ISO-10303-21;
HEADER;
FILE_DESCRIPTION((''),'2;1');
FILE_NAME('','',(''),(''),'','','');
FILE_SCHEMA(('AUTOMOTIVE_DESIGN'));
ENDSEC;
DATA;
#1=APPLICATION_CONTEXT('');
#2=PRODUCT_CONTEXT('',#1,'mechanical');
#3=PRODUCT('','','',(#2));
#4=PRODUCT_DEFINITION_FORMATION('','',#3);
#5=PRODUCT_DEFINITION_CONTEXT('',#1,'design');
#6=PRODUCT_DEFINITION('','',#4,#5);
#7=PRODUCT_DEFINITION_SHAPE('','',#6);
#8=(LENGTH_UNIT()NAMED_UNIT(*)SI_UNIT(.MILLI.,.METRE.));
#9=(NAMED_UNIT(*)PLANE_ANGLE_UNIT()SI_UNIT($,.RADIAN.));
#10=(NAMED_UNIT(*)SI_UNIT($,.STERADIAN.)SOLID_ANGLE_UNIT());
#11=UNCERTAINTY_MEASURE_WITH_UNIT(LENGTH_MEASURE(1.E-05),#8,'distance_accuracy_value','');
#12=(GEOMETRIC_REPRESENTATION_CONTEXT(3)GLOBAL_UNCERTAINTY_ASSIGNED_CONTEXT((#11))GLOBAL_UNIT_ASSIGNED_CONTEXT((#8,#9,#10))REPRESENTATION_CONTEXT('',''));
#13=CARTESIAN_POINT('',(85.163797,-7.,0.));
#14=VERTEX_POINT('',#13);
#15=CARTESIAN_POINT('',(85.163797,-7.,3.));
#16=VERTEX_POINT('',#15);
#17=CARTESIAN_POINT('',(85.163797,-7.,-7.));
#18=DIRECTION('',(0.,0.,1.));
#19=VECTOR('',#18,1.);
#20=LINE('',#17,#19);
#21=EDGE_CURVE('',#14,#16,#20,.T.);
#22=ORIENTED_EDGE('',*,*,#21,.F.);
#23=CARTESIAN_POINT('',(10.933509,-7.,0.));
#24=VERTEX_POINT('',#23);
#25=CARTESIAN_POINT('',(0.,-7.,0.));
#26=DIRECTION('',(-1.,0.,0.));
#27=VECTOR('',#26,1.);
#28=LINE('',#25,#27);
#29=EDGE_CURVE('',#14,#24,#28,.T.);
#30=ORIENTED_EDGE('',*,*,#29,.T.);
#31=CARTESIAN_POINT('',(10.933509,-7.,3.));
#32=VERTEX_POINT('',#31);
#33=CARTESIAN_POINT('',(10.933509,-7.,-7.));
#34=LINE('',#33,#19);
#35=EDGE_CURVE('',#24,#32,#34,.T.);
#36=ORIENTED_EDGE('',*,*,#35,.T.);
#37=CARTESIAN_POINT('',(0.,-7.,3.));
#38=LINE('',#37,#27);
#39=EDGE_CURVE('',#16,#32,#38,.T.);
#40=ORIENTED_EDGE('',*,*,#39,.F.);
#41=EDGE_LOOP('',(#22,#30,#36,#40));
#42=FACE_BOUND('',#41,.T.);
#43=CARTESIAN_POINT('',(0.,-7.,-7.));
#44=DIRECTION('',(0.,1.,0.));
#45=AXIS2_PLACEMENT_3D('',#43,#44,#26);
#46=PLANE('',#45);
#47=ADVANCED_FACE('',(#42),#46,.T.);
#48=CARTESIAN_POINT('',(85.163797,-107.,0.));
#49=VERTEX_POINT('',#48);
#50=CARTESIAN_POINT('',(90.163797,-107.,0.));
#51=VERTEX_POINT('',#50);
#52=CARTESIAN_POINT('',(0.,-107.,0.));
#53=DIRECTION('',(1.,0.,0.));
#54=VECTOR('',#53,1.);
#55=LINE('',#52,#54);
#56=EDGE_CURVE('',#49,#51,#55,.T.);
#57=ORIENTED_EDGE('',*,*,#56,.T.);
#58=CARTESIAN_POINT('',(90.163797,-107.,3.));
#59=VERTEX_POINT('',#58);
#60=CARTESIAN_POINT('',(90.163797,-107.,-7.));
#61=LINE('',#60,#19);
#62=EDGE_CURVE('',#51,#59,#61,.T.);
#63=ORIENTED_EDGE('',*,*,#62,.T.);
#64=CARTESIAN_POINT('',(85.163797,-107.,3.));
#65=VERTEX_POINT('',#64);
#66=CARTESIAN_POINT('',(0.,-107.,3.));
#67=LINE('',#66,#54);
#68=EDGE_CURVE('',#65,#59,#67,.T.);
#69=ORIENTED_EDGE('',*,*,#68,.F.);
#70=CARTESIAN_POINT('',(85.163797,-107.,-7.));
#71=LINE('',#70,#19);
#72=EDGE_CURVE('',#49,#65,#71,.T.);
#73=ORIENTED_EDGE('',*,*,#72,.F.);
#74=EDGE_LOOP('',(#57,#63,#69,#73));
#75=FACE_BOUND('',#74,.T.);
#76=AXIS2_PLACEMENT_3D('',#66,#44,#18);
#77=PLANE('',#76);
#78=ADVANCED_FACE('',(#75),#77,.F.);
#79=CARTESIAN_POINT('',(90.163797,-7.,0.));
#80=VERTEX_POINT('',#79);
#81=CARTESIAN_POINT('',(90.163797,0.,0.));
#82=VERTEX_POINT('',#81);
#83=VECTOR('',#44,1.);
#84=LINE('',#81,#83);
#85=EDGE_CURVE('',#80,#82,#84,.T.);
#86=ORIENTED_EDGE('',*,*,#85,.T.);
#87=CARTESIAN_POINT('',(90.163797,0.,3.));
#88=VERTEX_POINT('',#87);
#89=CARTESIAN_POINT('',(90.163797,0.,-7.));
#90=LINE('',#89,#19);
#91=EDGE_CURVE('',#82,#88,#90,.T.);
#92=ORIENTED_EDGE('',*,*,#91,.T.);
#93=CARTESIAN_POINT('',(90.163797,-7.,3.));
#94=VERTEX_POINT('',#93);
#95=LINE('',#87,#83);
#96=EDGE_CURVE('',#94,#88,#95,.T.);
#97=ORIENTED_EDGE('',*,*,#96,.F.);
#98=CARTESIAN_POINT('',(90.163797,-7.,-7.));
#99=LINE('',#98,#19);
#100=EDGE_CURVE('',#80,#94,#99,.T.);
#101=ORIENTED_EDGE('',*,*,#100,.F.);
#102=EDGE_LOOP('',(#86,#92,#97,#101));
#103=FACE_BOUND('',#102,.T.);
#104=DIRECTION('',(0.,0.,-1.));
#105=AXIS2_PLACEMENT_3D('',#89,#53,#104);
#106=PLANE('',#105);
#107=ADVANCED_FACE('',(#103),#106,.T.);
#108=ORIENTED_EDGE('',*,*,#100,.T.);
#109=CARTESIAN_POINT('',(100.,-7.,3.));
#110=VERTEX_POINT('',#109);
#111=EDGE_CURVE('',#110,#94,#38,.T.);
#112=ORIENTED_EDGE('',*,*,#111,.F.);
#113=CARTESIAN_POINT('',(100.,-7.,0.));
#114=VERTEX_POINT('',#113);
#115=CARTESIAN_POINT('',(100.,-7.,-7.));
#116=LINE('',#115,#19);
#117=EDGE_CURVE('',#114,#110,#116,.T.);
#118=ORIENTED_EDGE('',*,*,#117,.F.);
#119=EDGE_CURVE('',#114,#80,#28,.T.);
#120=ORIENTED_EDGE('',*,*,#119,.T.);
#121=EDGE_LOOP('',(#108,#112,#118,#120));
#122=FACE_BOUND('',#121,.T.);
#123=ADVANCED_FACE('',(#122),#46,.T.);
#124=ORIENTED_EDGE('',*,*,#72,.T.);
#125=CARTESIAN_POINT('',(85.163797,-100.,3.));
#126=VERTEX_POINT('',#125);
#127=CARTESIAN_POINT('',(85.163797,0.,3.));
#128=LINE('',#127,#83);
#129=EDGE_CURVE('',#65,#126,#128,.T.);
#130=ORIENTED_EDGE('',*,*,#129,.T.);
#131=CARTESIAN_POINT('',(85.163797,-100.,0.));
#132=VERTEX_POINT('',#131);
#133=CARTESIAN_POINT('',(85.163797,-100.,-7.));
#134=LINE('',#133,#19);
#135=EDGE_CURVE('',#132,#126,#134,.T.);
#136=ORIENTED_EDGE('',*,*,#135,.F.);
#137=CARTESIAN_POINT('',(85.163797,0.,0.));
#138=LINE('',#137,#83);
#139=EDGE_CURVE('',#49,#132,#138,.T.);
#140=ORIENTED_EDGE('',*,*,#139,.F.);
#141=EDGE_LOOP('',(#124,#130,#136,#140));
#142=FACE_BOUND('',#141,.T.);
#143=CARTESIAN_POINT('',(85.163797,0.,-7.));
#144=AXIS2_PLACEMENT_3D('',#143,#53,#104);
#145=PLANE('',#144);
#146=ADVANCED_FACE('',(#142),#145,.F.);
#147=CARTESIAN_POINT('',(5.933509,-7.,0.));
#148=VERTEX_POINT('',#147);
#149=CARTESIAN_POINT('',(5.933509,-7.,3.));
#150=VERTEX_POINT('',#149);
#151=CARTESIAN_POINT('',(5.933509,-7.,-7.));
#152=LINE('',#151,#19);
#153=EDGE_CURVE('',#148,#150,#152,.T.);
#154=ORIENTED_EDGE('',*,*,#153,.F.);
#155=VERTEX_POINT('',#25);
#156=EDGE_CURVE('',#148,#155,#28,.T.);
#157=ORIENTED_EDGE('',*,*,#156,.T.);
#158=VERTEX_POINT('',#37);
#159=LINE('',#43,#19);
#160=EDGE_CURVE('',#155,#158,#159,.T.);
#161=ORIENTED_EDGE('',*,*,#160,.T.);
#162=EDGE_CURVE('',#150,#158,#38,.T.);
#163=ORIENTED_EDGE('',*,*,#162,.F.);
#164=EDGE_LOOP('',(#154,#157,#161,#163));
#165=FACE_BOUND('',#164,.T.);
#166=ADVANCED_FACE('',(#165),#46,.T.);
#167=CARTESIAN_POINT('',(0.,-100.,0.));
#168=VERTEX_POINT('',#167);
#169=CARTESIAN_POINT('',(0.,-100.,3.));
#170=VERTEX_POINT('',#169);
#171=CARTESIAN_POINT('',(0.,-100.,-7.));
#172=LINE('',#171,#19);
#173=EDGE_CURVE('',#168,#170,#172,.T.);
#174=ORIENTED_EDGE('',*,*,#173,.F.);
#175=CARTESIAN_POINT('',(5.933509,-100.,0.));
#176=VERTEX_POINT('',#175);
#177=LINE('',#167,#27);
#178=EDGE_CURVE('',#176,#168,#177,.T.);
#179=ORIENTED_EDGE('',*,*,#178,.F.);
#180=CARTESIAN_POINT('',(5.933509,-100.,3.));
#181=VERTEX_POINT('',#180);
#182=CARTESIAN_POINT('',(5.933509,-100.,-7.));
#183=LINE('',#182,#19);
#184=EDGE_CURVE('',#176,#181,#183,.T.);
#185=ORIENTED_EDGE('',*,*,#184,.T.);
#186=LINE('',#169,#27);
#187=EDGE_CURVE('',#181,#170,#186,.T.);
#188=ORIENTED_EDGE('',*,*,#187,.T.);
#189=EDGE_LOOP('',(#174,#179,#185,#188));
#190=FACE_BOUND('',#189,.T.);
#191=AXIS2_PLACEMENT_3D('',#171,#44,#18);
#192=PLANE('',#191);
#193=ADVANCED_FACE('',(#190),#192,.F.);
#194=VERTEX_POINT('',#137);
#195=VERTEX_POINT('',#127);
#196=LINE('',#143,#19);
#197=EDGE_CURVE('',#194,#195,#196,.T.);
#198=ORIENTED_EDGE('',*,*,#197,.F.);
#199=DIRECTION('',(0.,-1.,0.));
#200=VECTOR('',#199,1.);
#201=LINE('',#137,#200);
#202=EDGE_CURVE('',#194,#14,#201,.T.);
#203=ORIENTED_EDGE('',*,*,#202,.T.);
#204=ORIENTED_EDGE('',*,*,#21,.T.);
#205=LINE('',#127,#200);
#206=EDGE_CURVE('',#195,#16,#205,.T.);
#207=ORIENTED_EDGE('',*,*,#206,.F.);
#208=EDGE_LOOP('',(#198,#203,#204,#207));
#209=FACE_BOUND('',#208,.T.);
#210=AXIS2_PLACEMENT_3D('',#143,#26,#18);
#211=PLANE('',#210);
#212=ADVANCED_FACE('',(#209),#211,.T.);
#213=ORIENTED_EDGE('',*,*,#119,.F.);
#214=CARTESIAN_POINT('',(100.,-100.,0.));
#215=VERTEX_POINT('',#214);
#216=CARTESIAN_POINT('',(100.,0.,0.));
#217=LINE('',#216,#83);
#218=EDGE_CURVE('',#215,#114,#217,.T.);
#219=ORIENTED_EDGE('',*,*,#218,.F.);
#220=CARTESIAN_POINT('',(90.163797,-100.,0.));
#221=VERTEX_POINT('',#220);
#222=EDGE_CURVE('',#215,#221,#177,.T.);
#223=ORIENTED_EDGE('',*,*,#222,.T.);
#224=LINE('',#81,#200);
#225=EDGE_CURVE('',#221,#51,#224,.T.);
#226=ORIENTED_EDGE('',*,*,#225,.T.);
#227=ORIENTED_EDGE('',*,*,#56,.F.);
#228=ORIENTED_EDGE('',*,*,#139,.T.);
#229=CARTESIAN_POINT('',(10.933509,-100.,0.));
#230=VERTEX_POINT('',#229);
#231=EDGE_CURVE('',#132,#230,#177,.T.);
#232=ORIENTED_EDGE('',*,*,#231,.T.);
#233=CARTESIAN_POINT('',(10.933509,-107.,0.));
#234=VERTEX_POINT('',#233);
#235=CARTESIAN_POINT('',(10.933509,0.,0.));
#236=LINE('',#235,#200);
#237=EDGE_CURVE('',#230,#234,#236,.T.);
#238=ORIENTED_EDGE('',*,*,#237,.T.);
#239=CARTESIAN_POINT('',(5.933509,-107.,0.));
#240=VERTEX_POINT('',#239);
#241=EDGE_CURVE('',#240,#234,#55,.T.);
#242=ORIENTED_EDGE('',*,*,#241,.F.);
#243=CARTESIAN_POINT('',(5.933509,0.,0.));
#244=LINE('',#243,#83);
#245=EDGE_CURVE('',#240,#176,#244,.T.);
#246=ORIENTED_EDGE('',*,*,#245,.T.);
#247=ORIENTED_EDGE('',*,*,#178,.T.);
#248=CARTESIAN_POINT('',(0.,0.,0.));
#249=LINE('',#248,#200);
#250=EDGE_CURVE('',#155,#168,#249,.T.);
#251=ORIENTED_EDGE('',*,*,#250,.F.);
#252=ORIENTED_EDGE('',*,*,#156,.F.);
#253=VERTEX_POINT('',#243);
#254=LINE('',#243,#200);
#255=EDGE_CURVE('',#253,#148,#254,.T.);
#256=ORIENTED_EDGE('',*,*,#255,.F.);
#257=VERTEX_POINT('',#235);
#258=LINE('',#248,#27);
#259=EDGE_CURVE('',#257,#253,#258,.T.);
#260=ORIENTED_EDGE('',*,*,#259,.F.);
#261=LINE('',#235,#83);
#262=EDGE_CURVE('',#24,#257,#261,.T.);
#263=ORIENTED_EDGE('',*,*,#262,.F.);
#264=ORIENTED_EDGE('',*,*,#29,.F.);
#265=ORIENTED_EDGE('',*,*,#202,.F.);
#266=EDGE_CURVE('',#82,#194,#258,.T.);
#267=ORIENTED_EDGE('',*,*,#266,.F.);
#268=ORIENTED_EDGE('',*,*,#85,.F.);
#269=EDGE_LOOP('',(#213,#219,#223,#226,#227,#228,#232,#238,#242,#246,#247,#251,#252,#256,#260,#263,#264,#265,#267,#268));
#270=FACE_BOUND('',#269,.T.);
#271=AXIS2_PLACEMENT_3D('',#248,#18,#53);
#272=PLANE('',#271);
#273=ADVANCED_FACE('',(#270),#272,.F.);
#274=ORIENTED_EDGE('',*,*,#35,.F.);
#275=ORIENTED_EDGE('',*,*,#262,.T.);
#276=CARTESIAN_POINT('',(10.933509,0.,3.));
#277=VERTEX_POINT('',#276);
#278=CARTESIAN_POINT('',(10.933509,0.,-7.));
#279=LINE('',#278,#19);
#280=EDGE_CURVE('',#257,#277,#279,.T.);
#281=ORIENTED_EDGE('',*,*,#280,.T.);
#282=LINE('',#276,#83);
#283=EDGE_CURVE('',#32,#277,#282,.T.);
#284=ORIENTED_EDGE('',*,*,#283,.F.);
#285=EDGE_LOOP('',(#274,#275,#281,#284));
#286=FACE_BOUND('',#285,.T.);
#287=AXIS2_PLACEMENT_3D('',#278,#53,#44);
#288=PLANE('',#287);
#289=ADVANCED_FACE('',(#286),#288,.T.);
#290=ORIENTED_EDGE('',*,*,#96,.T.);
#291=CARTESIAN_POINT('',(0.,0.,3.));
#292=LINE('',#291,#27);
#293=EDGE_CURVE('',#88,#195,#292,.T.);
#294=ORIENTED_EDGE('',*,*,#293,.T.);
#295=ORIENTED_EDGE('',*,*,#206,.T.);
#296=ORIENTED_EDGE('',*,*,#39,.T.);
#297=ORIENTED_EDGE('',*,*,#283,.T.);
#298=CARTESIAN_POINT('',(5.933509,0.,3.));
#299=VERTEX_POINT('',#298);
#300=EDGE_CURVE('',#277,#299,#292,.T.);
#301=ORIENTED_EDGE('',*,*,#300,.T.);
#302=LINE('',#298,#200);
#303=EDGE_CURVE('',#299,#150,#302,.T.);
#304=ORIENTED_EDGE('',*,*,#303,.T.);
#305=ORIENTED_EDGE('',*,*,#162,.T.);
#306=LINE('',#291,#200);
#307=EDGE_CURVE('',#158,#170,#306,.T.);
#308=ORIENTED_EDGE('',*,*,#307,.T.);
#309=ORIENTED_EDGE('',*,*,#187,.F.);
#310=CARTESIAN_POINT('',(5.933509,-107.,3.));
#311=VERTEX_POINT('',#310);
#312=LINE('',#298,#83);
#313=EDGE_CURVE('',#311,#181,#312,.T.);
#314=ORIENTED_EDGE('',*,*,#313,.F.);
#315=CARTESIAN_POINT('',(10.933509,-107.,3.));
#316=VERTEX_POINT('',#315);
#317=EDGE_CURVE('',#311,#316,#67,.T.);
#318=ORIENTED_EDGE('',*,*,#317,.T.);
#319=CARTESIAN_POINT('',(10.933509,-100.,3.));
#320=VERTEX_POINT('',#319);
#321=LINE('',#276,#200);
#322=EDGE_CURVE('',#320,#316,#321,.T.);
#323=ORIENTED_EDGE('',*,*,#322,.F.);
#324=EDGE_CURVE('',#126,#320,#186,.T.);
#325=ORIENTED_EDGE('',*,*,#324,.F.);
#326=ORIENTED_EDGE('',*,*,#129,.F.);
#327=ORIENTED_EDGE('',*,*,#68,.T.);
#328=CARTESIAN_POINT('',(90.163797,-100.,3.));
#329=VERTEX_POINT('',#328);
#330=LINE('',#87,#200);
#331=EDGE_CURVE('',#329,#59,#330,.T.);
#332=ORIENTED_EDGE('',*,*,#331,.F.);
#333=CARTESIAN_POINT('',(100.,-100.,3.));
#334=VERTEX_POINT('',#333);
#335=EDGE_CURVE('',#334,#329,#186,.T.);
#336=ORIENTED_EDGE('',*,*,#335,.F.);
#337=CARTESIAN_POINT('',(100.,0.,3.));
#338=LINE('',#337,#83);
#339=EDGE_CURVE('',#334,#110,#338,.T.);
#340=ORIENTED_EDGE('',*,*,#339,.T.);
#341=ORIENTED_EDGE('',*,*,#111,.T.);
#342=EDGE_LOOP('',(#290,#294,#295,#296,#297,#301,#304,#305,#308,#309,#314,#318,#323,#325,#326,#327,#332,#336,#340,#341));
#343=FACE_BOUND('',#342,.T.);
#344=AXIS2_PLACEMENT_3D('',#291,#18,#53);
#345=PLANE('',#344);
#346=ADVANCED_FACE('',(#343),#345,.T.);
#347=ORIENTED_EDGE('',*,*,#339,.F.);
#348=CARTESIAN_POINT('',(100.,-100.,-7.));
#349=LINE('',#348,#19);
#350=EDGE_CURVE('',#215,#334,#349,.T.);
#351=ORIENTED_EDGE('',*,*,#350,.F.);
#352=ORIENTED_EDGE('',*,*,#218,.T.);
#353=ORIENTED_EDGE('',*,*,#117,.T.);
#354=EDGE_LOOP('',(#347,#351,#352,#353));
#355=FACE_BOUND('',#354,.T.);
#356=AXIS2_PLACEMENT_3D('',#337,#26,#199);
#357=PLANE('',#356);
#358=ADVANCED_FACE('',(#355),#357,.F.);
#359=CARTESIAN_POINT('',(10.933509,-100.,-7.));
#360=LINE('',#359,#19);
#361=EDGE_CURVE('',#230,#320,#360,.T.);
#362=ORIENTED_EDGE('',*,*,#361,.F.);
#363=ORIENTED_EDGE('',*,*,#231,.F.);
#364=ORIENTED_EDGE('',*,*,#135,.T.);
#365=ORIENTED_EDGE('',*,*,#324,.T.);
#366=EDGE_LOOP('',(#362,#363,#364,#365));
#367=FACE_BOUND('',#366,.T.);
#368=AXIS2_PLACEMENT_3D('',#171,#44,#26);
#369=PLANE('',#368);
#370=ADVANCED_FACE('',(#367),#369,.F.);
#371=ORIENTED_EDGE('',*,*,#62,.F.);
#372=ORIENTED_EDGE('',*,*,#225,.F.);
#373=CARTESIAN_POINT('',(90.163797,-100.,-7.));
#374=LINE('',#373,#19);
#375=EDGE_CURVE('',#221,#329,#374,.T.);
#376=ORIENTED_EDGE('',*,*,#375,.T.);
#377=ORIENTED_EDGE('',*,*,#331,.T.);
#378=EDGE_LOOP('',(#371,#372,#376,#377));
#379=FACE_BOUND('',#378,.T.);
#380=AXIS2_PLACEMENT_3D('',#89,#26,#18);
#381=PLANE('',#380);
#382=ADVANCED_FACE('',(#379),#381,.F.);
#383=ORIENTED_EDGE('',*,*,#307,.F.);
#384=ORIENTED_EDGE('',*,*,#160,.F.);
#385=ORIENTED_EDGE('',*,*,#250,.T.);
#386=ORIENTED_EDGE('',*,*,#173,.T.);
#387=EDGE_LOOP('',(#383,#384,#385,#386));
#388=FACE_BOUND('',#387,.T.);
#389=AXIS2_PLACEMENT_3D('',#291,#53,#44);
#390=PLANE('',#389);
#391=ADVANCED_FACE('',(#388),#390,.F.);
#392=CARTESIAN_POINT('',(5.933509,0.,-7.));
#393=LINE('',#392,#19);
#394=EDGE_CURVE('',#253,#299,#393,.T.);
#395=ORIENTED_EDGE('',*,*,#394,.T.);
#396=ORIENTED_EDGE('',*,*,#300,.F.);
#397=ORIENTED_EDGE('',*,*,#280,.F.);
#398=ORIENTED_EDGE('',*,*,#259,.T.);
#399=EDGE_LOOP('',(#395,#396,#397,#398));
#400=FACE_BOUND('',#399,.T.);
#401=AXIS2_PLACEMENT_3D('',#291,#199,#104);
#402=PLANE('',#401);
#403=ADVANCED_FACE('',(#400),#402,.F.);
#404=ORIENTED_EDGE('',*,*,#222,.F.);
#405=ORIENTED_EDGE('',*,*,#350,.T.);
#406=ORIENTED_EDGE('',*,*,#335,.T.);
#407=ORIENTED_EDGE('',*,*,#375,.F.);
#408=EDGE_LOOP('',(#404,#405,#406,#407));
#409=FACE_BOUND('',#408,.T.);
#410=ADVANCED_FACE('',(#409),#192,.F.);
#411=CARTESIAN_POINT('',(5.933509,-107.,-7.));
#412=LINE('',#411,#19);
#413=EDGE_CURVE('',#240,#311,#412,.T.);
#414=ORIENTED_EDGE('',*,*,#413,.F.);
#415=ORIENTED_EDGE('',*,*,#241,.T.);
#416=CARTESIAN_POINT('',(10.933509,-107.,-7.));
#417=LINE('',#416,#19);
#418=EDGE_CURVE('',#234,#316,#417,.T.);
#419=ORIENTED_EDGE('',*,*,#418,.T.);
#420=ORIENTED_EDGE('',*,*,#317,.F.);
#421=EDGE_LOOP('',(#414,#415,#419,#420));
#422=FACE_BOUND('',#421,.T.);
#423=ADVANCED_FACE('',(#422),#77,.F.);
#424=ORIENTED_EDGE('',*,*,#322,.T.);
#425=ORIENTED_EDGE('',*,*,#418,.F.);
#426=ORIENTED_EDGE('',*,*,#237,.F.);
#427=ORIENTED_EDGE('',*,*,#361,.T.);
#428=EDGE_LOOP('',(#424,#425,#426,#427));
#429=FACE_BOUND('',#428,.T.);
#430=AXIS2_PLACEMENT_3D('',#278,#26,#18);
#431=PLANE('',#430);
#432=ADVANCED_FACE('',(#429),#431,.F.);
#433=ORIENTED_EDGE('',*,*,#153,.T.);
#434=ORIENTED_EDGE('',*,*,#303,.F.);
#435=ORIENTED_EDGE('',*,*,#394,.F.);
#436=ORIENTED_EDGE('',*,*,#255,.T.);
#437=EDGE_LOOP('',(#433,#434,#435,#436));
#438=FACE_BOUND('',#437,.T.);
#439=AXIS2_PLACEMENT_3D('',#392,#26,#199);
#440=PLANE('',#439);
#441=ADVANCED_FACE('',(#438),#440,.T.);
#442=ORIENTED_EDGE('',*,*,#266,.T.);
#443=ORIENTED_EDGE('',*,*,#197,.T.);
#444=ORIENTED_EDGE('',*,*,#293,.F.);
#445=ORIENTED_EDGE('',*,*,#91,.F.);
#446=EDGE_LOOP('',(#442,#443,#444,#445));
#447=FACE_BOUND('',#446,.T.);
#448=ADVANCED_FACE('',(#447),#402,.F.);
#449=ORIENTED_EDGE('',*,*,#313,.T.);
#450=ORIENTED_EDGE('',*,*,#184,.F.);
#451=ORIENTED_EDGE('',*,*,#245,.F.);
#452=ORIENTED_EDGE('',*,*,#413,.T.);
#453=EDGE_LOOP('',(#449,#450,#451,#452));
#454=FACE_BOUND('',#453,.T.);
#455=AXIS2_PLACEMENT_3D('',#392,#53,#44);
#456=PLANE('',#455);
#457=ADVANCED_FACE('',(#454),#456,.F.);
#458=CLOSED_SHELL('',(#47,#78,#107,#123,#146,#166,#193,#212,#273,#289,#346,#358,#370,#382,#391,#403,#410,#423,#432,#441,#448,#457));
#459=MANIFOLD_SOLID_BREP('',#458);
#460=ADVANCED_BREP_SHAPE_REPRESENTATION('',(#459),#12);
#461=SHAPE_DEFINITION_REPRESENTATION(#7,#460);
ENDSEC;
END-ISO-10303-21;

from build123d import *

# Parameters (mm, degrees)
SKETCH1_W                     = 100
SKETCH1_H                     = 107
BOSS_EXTRUDE1_DEPTH           = 3
CUT_EXTRUDE_THIN2_START       = -3
CUT_EXTRUDE_THIN2_OUTLINE_W   = 5.933508572
CUT_EXTRUDE_THIN2_OUTLINE_H   = 7
CUT_EXTRUDE_THIN2_OUTLINE_W_2 = 74.23028827
CUT_EXTRUDE_THIN2_OUTLINE_W_3 = 9.836203158
CUT_EXTRUDE_THIN2_DEPTH       = 3


# Read off the part's stored shape, not the designer's step: Cut-Extrude-Thin2
with BuildPart() as part:
    # Sketch1 → Boss-Extrude1 (new body)
    with BuildSketch(Plane.XY):
        with Locations((50, -53.5)):
            Rectangle(SKETCH1_W, SKETCH1_H)
    extrude(amount=BOSS_EXTRUDE1_DEPTH)

    # Cut-Extrude-Thin2 outline → Cut-Extrude-Thin2 (cut)
    with BuildSketch(Plane.XY.offset(3).offset(CUT_EXTRUDE_THIN2_START)):
        with Locations((2.966754286, -103.5)):
            Rectangle(CUT_EXTRUDE_THIN2_OUTLINE_W, CUT_EXTRUDE_THIN2_OUTLINE_H)
        with Locations((48.048652707, -103.5)):
            Rectangle(CUT_EXTRUDE_THIN2_OUTLINE_W_2, CUT_EXTRUDE_THIN2_OUTLINE_H)
        with Locations((2.966754286, -3.5)):
            Rectangle(CUT_EXTRUDE_THIN2_OUTLINE_W, CUT_EXTRUDE_THIN2_OUTLINE_H)
        with Locations((95.081898421, -103.5)):
            Rectangle(CUT_EXTRUDE_THIN2_OUTLINE_W_3, CUT_EXTRUDE_THIN2_OUTLINE_H)
        with Locations((48.048652707, -3.5)):
            Rectangle(CUT_EXTRUDE_THIN2_OUTLINE_W_2, CUT_EXTRUDE_THIN2_OUTLINE_H)
        with Locations((95.081898421, -3.5)):
            Rectangle(CUT_EXTRUDE_THIN2_OUTLINE_W_3, CUT_EXTRUDE_THIN2_OUTLINE_H)
    extrude(amount=CUT_EXTRUDE_THIN2_DEPTH, mode=Mode.SUBTRACT)


solid = part.part
